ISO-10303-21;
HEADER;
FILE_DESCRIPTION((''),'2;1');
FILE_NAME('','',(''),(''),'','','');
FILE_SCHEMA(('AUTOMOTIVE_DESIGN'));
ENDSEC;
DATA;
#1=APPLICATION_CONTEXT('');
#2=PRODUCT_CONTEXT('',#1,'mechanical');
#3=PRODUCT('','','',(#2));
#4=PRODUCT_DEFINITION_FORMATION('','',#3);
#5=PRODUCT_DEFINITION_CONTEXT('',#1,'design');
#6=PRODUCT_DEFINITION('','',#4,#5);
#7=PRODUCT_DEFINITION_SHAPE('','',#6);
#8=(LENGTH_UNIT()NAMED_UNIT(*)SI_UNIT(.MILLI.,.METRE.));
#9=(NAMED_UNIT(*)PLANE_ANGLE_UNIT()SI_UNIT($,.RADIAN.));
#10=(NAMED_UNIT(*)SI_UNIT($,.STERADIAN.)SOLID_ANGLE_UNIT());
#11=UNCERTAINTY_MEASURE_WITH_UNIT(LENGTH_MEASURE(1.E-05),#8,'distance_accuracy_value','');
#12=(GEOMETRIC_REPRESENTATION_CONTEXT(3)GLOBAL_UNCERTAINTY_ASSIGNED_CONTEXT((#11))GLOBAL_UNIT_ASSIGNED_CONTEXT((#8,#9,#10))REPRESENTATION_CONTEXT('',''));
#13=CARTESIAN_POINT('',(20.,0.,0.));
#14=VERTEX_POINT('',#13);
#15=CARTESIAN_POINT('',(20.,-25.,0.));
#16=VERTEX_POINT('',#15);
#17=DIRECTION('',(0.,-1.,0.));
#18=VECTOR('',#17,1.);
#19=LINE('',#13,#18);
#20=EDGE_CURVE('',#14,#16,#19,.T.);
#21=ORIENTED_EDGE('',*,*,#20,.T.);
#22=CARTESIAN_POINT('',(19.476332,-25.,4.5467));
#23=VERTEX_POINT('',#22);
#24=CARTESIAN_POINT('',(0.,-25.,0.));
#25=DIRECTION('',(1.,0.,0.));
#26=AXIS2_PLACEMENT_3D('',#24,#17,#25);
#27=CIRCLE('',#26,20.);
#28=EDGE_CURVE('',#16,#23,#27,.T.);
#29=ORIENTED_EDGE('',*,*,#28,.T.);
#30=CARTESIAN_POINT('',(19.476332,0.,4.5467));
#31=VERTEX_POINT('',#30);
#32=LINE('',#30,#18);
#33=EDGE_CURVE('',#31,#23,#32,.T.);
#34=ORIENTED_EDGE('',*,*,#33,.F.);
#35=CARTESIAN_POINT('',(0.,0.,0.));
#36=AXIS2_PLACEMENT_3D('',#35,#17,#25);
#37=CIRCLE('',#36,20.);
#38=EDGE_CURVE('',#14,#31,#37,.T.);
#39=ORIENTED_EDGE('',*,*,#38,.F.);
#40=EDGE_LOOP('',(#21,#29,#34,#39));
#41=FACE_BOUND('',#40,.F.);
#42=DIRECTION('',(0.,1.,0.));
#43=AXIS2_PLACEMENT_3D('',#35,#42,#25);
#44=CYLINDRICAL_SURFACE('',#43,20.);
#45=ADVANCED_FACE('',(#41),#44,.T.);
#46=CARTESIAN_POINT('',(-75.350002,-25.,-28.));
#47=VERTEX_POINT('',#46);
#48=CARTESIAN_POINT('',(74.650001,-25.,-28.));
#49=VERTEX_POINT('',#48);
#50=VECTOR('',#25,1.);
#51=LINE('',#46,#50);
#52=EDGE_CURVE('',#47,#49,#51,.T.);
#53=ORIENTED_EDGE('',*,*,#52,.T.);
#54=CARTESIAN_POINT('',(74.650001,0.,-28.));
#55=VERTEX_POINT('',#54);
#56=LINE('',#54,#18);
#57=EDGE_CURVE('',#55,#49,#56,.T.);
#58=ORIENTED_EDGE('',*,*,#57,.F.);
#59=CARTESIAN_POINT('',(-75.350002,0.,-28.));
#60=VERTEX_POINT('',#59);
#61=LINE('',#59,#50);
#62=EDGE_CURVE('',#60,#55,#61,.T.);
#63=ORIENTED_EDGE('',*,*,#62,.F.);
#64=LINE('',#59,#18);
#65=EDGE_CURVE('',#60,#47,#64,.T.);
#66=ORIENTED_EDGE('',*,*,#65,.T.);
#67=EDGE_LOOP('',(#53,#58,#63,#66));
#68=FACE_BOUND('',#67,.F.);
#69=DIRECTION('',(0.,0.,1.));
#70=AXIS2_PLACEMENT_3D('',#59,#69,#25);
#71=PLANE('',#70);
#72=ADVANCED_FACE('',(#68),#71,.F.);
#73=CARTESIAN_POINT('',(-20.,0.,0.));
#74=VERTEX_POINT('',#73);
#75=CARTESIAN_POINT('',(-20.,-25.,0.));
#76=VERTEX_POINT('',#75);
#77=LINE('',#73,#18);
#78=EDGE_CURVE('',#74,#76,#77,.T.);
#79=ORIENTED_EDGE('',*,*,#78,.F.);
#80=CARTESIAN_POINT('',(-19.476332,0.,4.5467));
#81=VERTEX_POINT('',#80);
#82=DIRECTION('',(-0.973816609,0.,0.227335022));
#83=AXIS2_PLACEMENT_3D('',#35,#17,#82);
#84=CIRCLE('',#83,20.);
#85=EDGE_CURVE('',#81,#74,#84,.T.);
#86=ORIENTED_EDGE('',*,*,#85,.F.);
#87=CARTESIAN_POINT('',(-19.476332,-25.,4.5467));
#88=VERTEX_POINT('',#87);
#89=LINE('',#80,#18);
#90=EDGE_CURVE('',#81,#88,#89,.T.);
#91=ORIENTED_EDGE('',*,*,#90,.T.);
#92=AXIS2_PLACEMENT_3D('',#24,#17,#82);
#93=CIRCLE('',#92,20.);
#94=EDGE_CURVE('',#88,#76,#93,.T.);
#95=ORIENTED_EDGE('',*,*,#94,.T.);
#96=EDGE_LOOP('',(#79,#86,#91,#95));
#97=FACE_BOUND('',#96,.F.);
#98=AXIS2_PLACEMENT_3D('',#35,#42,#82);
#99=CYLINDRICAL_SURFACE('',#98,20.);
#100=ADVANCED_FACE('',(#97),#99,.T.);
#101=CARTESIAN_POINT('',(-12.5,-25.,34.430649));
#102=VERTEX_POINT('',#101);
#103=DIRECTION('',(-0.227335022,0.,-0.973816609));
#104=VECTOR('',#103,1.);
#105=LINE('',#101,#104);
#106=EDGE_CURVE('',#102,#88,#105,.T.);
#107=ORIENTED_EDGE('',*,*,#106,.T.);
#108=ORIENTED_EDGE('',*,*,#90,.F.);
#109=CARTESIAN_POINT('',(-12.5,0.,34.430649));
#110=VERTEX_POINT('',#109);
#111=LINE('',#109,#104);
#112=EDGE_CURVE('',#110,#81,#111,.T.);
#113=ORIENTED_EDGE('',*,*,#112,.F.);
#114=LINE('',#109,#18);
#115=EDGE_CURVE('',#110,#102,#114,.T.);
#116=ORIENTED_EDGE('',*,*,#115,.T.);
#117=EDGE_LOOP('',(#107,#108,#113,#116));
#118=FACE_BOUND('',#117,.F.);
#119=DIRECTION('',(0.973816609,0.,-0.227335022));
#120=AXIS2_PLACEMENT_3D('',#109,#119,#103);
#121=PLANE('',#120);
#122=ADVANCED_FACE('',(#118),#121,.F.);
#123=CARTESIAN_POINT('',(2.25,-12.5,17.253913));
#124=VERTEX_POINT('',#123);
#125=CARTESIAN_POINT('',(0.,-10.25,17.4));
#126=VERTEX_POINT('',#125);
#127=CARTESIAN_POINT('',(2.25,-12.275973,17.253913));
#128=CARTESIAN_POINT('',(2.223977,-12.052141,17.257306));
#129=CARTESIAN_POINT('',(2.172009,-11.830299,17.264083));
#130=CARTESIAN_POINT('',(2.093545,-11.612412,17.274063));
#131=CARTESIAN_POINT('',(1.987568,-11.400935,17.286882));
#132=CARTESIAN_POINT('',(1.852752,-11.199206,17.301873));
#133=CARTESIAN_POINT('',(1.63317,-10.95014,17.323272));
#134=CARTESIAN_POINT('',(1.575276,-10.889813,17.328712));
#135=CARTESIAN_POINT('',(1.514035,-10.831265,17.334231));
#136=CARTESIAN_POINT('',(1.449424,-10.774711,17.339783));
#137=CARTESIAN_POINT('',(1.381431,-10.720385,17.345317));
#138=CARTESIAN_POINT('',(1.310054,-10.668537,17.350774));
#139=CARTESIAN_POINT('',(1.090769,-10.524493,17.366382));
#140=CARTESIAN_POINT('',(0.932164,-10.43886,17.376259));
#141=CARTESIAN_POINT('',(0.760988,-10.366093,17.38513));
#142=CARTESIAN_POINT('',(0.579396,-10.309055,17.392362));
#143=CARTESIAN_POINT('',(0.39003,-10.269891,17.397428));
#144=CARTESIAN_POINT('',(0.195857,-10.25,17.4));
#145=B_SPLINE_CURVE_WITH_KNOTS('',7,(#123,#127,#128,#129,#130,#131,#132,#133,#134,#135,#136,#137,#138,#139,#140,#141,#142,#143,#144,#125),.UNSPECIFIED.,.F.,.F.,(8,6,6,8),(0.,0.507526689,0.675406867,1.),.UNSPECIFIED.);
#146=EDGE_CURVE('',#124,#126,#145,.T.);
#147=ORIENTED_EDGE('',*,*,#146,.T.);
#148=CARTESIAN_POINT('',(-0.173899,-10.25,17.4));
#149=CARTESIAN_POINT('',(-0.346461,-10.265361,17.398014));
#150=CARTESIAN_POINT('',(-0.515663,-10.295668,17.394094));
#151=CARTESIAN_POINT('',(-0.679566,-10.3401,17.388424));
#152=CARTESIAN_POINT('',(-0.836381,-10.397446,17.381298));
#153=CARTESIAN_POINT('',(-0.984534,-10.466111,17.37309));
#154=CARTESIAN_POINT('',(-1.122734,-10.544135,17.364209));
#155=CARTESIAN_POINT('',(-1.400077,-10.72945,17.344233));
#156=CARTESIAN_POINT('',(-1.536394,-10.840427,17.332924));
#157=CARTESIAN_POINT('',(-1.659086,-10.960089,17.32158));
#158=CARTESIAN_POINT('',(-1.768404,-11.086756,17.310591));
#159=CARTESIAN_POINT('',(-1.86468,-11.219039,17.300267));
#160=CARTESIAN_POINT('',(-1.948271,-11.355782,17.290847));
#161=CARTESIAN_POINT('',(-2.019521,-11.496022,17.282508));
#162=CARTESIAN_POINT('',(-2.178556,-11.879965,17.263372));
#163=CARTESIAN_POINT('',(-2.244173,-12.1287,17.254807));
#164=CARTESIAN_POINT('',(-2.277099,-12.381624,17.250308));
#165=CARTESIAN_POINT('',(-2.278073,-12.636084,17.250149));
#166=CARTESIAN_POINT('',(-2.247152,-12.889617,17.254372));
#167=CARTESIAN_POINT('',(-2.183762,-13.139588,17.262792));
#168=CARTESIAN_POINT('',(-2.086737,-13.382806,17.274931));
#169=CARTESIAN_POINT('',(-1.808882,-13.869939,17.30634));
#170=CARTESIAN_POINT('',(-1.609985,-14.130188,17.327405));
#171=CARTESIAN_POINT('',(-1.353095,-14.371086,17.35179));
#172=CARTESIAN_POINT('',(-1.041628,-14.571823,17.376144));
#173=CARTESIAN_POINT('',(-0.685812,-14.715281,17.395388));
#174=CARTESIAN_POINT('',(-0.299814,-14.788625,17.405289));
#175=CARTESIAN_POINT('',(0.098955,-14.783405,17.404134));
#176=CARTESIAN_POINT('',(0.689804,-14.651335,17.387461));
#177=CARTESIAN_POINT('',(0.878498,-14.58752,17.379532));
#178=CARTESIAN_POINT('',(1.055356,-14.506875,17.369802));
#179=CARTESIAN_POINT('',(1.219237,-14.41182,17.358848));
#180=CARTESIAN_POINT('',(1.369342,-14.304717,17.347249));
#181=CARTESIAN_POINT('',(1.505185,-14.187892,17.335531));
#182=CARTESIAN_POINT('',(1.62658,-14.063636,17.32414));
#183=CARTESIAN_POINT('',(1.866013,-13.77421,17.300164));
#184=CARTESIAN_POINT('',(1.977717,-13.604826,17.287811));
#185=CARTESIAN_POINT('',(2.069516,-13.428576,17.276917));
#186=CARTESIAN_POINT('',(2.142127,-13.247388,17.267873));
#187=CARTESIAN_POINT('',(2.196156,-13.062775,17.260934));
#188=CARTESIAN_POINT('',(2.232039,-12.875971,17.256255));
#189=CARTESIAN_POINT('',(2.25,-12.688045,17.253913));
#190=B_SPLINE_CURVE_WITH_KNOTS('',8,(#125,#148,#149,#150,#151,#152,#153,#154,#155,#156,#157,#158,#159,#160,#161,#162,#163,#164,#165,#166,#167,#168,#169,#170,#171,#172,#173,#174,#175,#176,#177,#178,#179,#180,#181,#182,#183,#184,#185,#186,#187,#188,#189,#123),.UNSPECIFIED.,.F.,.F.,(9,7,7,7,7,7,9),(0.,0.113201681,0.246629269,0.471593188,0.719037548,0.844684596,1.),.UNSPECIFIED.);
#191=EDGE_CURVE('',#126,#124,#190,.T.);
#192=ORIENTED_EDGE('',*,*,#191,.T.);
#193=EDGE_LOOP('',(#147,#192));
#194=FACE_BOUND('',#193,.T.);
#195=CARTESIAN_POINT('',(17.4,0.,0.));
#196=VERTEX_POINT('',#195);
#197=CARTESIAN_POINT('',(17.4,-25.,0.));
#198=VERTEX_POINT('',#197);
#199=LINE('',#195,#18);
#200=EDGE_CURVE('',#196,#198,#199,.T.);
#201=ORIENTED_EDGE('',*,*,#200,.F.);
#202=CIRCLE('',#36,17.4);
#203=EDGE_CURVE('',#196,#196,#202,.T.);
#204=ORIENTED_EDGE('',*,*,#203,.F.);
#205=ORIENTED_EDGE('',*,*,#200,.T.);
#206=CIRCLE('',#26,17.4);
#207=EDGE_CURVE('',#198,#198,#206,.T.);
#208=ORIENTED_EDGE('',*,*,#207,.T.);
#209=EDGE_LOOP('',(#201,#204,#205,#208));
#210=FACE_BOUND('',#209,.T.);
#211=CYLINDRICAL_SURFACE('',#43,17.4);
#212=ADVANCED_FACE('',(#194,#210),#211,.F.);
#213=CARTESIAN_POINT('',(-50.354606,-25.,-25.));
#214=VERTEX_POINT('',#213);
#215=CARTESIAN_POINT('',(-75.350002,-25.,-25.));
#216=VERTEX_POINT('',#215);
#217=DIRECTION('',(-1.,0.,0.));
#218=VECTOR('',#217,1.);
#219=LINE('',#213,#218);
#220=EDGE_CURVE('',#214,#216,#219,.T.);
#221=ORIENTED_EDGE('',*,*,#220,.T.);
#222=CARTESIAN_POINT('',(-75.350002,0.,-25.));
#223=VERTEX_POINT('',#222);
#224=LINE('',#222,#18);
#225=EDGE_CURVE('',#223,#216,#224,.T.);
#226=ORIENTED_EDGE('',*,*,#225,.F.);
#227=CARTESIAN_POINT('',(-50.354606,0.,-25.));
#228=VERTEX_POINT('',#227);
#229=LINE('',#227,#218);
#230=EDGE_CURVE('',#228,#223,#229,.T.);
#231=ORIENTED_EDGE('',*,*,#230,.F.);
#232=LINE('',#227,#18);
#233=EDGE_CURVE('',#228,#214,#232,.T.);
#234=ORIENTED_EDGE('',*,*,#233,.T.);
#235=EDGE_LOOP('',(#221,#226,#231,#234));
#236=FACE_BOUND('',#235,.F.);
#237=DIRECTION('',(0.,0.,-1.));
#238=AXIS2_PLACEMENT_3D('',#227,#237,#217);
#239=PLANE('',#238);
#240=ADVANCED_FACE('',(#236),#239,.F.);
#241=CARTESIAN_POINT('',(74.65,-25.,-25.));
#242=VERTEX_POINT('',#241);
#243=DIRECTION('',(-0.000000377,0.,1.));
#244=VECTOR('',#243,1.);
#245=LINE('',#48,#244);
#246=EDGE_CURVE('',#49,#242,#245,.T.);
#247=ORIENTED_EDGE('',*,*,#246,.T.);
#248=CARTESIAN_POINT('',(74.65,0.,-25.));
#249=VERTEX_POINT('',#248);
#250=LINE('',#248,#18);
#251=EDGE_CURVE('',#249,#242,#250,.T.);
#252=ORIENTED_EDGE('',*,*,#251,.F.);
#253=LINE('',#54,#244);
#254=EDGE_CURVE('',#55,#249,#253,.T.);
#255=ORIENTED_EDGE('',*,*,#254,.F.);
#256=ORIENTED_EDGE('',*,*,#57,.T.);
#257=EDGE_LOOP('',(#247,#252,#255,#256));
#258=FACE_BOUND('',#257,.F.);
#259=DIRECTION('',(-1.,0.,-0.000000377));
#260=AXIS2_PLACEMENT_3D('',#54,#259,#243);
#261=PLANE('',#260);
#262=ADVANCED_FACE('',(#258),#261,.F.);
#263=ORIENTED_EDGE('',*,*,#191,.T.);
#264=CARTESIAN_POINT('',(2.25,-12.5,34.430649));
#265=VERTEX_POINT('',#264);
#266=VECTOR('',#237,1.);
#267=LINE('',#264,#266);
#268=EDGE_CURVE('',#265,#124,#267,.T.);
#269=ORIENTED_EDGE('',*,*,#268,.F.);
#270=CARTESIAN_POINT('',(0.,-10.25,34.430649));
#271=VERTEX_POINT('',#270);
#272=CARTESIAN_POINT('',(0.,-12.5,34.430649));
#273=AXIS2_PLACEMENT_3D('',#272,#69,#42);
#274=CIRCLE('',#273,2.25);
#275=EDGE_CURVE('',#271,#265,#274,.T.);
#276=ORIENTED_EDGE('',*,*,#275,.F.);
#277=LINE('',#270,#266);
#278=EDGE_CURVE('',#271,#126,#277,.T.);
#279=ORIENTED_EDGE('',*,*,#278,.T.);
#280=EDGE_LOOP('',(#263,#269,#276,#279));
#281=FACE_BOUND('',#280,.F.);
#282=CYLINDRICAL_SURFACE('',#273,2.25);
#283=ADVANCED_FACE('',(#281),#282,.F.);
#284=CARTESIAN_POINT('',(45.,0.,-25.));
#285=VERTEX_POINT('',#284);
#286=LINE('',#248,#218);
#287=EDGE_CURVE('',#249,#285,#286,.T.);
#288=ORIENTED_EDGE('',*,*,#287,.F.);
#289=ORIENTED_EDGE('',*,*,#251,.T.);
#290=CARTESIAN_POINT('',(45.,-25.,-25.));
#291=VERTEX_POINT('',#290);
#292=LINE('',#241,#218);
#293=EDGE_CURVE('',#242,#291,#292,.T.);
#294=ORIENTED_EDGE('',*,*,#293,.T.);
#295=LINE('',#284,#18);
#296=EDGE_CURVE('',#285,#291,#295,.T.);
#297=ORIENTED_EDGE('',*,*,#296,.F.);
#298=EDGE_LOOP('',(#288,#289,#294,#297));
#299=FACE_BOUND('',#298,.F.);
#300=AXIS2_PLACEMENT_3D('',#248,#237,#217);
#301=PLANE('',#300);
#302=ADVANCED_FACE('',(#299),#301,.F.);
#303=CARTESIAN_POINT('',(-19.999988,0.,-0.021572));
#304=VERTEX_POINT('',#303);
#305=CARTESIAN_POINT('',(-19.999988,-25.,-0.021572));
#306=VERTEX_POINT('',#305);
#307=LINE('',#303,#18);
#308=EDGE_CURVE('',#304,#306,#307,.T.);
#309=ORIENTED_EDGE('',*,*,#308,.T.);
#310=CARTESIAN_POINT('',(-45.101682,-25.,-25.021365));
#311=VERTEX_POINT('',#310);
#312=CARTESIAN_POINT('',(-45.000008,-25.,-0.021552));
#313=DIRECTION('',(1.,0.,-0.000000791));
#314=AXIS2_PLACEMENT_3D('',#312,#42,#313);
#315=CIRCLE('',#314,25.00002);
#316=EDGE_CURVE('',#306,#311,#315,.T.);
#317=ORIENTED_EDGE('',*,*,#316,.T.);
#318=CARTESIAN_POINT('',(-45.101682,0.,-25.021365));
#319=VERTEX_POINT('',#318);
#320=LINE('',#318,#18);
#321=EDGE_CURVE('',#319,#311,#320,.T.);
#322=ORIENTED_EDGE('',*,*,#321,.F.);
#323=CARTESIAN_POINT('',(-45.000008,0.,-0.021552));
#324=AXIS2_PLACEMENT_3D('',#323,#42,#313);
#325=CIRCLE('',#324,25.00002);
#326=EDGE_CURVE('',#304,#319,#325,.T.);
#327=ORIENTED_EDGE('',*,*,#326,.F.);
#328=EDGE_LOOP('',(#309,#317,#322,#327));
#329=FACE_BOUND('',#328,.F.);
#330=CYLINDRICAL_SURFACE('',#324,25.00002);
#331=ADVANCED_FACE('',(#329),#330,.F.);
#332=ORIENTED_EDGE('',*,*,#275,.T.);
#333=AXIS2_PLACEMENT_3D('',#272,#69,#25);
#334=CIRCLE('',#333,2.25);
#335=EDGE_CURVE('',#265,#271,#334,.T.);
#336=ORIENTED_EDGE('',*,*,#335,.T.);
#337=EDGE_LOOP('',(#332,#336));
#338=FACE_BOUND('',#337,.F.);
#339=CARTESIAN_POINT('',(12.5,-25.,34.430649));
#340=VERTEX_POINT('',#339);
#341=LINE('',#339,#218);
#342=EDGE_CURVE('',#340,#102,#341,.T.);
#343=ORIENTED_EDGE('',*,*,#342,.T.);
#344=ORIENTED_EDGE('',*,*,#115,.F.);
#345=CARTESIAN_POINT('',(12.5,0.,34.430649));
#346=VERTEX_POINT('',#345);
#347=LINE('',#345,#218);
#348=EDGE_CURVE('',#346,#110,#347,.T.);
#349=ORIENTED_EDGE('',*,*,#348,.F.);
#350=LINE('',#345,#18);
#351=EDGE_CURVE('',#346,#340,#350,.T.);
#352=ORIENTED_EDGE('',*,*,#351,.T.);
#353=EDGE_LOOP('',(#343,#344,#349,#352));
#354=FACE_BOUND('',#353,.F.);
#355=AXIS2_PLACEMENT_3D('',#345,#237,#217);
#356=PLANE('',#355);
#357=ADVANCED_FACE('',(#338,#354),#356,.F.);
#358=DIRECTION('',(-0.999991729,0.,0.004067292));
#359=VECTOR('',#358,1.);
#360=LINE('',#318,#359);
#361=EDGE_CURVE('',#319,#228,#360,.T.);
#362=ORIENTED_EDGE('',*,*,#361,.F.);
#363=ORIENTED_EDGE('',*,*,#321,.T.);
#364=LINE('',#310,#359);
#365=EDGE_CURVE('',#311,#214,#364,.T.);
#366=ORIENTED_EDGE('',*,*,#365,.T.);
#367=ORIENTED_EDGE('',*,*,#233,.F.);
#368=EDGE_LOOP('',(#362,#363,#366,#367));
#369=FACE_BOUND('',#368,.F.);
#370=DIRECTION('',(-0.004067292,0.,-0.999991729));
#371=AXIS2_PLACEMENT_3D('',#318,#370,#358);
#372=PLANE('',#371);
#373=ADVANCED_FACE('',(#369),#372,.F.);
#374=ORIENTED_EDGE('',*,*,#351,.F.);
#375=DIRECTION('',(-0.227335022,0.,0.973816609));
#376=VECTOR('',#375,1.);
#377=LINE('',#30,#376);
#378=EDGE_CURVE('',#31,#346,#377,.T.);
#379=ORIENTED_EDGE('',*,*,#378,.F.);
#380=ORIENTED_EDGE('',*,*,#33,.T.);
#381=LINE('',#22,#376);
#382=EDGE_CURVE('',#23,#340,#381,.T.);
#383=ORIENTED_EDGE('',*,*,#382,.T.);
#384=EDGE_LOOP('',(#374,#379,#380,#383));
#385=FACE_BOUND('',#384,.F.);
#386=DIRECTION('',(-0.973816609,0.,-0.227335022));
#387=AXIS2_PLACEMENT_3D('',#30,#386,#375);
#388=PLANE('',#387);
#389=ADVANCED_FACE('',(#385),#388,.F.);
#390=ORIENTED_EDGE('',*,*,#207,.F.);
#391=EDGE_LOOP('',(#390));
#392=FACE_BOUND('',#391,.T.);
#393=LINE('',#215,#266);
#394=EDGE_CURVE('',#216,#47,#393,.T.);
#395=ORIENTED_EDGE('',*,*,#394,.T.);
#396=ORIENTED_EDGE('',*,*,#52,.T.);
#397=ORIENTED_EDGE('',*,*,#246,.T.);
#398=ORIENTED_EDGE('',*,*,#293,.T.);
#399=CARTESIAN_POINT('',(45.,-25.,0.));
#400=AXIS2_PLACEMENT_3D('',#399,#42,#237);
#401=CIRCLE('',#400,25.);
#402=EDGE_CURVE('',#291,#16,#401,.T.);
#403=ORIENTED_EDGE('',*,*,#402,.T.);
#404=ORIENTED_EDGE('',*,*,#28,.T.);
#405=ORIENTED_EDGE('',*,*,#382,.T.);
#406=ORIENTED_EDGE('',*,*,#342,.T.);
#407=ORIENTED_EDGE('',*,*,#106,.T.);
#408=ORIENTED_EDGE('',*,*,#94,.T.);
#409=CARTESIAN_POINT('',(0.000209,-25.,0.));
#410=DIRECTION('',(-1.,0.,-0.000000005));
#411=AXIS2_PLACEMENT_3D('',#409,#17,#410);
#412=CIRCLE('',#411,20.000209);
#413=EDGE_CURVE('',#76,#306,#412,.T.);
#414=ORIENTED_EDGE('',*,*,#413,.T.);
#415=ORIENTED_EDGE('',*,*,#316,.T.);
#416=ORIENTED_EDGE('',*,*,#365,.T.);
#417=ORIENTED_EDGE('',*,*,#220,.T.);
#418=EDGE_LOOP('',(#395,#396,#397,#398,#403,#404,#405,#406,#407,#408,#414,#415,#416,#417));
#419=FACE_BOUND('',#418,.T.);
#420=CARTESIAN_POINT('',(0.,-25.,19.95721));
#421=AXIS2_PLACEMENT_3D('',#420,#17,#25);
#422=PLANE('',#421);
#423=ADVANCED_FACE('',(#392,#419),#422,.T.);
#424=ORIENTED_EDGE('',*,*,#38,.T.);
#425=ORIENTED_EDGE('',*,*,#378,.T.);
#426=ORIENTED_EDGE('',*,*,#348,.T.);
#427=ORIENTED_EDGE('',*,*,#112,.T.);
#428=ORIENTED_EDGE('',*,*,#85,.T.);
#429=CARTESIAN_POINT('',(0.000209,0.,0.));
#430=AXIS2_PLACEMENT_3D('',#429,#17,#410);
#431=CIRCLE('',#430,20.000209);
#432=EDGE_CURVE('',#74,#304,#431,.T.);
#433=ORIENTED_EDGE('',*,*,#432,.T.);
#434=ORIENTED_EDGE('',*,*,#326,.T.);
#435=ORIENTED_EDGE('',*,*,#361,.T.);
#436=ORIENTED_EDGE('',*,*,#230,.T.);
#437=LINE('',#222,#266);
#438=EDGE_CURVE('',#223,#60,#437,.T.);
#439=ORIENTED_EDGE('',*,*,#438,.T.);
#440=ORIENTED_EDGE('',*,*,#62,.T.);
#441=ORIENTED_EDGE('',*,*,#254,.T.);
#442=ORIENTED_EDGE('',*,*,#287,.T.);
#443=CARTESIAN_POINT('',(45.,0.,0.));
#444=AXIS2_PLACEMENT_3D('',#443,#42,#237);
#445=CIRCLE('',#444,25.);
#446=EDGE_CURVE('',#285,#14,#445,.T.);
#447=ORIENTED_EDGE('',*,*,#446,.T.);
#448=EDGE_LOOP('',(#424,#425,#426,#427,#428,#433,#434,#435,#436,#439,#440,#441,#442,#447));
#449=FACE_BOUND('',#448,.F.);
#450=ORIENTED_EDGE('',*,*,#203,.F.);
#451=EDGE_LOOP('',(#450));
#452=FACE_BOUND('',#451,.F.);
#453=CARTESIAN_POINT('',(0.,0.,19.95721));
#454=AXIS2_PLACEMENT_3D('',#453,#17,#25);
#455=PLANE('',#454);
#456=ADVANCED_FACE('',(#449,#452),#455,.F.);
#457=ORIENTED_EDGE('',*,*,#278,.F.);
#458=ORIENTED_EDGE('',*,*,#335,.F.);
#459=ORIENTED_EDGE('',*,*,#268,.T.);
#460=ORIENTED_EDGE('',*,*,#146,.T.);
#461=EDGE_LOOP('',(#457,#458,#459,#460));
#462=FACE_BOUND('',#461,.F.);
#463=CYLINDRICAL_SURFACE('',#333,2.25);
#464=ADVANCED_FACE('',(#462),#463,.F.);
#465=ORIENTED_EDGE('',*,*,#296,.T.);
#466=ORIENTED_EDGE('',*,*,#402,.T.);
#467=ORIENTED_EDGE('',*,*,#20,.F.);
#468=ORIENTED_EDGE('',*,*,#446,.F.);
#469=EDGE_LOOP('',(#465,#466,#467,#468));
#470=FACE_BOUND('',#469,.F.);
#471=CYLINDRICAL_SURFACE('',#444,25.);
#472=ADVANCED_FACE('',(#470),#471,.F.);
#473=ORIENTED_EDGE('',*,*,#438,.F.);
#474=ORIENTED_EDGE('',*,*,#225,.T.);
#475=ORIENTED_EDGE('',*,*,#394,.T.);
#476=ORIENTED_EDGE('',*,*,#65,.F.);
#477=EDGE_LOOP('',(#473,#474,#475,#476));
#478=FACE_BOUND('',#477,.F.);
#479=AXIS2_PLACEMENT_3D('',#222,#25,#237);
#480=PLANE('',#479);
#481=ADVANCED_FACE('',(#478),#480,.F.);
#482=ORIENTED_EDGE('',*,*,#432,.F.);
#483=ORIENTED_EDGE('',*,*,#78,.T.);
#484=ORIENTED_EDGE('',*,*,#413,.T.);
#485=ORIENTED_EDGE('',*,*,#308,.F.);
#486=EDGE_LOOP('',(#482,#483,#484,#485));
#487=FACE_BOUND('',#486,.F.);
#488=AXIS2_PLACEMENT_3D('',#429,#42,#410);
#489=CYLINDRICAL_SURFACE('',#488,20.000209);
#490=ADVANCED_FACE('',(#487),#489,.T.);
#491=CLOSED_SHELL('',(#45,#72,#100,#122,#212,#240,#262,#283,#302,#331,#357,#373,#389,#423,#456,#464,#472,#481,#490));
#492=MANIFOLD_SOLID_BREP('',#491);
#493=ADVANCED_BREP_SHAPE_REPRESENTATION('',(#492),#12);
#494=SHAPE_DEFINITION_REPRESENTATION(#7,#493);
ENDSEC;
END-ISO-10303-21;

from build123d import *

# Parameters (mm, degrees)
F0_R     = 17.4
F1_DEPTH = 25
F3_DEPTH = 50


# Not quite as in the source:
# - ends of sketch curves that miss each other by under 0.0002 mm in the source are joined


with BuildPart() as f1:
    # F0 (on Front) → F1 (new body)
    with BuildSketch(Plane.XZ):
        with BuildLine():
            ThreePointArc((-19.4763321764, 4.5467004469), (0, 20), (19.4763321764, 4.5467004469))
            Line((19.4763321764, 4.5467004469), (12.5, 34.4306491315))
            Line((12.5, 34.4306491315), (0, 34.4306491315))
            Line((0, 34.4306491315), (-12.5, 34.4306491315))
            Line((-12.5, 34.4306491315), (-19.4763321764, 4.5467004469))
        make_face()
        with BuildLine():
            ThreePointArc((-19.9999883661, -0.0215721294), (0.0107860663, -19.9999970915), (20, 0))
            ThreePointArc((20, 0), (19.8686517349, 2.2883789537), (19.4763321764, 4.5467004469))
            ThreePointArc((19.4763321764, 4.5467004469), (0, 20), (-19.4763321764, 4.5467004469))
            ThreePointArc((-19.4763321764, 4.5467004469), (-19.8686517349, 2.2883789537), (-20, 0))
            ThreePointArc((-20, 0), (-19.9999970915, -0.0107860663), (-19.9999883661, -0.0215721294))
        make_face()
        Circle(F0_R, mode=Mode.SUBTRACT)
        with BuildLine():
            ThreePointArc((45, -25), (27.3223304703, -17.6776695297), (20, 0))
            ThreePointArc((20, 0), (0.0107860663, -19.9999970915), (-19.9999883661, -0.0215721294))
            ThreePointArc((-19.9999883661, -0.0215721294), (-27.3583172251, -17.7351553161), (-45.1016823096, -25.0213653552))
            Line((-45.1016823096, -25.0213653552), (-50.3546064898, -25))
            Line((-50.3546064898, -25), (-75.3500018494, -25))
            Line((-75.3500018494, -25), (-75.3500018494, -28))
            Line((-75.3500018494, -28), (74.6500011308, -28))
            Line((74.6500011308, -28), (74.65, -25))
            Line((74.65, -25), (50.3546064898, -25))
            Line((50.3546064898, -25), (45, -25))
        make_face()
    extrude(amount=F1_DEPTH)

    # F2 (on face) → F3 (cut)
    with BuildSketch(Plane.XY.offset(34.4306491315)):
        with BuildLine():
            ThreePointArc((2.25, -12.5), (1.5909902577, -10.9090097423), (0, -10.25))
            ThreePointArc((0, -10.25), (-1.5909902577, -14.0909902577), (2.25, -12.5))
        make_face()
    extrude(amount=-F3_DEPTH, mode=Mode.SUBTRACT)


solid = f1.part
